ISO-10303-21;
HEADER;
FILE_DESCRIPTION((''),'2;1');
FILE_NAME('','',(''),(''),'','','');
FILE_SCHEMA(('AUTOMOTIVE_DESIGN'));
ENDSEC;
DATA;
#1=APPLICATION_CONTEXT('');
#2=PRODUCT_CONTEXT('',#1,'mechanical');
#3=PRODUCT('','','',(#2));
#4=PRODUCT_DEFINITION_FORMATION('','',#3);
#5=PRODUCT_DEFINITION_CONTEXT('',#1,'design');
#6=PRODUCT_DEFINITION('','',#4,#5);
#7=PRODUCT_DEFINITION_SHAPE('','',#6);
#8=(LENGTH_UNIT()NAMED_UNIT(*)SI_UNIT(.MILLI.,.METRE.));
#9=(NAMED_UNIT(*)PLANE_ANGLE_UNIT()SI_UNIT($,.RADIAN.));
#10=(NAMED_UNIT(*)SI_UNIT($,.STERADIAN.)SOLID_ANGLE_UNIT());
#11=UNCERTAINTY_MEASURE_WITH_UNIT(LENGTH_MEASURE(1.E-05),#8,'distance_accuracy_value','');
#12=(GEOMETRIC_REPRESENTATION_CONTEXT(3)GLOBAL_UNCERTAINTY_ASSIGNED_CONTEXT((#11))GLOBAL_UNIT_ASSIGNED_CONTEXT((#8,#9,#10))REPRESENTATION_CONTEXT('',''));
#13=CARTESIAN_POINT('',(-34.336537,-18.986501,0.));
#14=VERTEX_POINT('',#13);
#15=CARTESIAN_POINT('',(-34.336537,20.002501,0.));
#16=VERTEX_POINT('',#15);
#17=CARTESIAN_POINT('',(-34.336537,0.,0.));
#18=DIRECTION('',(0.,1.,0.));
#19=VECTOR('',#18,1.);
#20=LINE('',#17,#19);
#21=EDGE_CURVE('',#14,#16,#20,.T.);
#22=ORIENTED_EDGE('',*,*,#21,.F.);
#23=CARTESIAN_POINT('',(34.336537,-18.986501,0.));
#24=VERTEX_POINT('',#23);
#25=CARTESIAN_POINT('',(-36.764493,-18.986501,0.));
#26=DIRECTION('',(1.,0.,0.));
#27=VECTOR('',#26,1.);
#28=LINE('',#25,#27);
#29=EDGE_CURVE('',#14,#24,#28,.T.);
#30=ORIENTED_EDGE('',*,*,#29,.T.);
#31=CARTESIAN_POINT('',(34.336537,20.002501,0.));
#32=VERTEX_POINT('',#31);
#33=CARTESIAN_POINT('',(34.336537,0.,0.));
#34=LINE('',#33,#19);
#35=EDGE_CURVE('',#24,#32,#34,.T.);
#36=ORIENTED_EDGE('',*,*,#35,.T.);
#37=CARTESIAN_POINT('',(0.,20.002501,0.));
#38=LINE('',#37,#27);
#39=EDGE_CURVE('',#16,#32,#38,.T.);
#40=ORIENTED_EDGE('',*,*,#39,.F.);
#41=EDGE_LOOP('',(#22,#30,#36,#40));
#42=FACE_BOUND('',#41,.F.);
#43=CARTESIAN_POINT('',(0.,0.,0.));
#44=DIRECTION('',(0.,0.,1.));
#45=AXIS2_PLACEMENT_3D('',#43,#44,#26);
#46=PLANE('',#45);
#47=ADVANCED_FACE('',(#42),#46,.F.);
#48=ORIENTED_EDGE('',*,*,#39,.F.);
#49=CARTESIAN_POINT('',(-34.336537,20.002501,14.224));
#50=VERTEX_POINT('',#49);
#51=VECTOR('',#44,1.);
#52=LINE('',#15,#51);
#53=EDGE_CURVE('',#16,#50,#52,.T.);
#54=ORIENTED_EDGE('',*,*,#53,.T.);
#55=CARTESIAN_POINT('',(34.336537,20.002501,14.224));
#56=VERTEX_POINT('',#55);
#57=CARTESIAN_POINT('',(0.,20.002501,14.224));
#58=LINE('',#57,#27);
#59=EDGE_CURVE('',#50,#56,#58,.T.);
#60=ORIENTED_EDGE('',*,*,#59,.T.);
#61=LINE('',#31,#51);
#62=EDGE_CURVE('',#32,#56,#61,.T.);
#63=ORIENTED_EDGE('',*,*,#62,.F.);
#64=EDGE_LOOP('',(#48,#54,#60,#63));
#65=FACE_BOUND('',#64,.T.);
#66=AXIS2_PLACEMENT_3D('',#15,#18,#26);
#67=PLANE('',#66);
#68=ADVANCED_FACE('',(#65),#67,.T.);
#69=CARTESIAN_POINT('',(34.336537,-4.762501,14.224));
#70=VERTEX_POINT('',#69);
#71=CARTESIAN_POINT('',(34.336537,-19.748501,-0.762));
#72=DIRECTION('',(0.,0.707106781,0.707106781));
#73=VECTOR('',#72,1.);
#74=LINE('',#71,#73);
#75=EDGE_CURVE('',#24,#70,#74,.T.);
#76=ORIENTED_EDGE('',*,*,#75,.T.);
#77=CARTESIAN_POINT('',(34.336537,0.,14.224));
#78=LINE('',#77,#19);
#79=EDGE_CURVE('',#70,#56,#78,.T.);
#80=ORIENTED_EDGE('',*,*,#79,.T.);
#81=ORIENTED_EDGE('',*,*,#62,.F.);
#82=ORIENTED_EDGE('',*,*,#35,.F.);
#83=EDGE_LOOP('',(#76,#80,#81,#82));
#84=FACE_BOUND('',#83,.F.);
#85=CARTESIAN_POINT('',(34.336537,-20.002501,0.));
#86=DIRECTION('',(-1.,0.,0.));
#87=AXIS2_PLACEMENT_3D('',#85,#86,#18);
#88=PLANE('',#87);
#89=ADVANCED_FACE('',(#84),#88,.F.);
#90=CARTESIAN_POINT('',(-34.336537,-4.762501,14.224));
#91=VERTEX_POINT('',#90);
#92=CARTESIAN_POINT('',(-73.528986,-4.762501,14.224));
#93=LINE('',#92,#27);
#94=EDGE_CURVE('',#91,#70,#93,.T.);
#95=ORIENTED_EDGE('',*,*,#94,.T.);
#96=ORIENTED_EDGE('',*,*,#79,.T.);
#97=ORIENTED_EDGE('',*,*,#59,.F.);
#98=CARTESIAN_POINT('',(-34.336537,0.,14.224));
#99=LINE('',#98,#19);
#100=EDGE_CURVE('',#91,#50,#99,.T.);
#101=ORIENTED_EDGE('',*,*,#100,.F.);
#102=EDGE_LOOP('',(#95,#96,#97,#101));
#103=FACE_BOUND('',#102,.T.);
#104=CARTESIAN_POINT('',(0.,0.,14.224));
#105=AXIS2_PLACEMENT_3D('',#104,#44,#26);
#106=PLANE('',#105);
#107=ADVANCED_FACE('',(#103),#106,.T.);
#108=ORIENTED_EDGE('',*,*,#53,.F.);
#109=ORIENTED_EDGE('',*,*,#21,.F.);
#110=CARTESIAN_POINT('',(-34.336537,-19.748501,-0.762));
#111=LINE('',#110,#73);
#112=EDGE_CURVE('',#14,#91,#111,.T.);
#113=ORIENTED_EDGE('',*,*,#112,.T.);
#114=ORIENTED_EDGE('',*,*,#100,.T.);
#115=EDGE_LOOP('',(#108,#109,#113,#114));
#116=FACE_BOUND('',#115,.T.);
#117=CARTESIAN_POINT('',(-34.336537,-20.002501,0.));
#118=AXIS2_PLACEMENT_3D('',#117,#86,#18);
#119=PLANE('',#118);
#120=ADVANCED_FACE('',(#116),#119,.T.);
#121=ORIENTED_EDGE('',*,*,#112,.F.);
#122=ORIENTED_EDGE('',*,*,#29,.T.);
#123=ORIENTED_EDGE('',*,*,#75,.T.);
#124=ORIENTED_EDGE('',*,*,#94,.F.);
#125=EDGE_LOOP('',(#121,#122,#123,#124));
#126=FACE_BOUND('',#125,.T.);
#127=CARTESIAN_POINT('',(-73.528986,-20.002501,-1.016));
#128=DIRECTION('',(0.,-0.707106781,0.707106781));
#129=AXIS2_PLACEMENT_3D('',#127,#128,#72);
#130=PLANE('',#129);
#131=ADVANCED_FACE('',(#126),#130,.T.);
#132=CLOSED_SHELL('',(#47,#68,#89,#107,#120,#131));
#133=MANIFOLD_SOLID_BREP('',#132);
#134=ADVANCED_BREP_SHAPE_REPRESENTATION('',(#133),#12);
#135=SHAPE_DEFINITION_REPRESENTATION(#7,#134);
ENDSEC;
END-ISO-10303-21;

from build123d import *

# Parameters (mm, degrees)
F0_W        = 68.6730742455
F0_H        = 40.0050021708
F1_DEPTH    = 14.224
F2_T1_DEPTH = 147.0579717187


# Not quite as in the source:
# - a fillet or chamfer that OpenCascade refuses, or shapes differently, is made with other operations: its cross-section is extruded or revolved along the edge and cut away or added


with BuildPart() as f1:
    # F0 (on Top) → F1 (new body)
    with BuildSketch(Plane.XY):
        Rectangle(F0_W, F0_H)
    extrude(amount=F1_DEPTH)

    # F2: chamfer of 15.24 on 1 edges, made by hand

    # F2_s2 → F2_t1 (cut)
    with BuildSketch(Plane.YZ.offset(-73.5289858593)):
        Polygon((-20.0025010854, -1.016), (-4.7625010854, 14.224), (-20.0025010854, 14.224), align=None)
    extrude(amount=F2_T1_DEPTH, mode=Mode.SUBTRACT)


solid = f1.part
